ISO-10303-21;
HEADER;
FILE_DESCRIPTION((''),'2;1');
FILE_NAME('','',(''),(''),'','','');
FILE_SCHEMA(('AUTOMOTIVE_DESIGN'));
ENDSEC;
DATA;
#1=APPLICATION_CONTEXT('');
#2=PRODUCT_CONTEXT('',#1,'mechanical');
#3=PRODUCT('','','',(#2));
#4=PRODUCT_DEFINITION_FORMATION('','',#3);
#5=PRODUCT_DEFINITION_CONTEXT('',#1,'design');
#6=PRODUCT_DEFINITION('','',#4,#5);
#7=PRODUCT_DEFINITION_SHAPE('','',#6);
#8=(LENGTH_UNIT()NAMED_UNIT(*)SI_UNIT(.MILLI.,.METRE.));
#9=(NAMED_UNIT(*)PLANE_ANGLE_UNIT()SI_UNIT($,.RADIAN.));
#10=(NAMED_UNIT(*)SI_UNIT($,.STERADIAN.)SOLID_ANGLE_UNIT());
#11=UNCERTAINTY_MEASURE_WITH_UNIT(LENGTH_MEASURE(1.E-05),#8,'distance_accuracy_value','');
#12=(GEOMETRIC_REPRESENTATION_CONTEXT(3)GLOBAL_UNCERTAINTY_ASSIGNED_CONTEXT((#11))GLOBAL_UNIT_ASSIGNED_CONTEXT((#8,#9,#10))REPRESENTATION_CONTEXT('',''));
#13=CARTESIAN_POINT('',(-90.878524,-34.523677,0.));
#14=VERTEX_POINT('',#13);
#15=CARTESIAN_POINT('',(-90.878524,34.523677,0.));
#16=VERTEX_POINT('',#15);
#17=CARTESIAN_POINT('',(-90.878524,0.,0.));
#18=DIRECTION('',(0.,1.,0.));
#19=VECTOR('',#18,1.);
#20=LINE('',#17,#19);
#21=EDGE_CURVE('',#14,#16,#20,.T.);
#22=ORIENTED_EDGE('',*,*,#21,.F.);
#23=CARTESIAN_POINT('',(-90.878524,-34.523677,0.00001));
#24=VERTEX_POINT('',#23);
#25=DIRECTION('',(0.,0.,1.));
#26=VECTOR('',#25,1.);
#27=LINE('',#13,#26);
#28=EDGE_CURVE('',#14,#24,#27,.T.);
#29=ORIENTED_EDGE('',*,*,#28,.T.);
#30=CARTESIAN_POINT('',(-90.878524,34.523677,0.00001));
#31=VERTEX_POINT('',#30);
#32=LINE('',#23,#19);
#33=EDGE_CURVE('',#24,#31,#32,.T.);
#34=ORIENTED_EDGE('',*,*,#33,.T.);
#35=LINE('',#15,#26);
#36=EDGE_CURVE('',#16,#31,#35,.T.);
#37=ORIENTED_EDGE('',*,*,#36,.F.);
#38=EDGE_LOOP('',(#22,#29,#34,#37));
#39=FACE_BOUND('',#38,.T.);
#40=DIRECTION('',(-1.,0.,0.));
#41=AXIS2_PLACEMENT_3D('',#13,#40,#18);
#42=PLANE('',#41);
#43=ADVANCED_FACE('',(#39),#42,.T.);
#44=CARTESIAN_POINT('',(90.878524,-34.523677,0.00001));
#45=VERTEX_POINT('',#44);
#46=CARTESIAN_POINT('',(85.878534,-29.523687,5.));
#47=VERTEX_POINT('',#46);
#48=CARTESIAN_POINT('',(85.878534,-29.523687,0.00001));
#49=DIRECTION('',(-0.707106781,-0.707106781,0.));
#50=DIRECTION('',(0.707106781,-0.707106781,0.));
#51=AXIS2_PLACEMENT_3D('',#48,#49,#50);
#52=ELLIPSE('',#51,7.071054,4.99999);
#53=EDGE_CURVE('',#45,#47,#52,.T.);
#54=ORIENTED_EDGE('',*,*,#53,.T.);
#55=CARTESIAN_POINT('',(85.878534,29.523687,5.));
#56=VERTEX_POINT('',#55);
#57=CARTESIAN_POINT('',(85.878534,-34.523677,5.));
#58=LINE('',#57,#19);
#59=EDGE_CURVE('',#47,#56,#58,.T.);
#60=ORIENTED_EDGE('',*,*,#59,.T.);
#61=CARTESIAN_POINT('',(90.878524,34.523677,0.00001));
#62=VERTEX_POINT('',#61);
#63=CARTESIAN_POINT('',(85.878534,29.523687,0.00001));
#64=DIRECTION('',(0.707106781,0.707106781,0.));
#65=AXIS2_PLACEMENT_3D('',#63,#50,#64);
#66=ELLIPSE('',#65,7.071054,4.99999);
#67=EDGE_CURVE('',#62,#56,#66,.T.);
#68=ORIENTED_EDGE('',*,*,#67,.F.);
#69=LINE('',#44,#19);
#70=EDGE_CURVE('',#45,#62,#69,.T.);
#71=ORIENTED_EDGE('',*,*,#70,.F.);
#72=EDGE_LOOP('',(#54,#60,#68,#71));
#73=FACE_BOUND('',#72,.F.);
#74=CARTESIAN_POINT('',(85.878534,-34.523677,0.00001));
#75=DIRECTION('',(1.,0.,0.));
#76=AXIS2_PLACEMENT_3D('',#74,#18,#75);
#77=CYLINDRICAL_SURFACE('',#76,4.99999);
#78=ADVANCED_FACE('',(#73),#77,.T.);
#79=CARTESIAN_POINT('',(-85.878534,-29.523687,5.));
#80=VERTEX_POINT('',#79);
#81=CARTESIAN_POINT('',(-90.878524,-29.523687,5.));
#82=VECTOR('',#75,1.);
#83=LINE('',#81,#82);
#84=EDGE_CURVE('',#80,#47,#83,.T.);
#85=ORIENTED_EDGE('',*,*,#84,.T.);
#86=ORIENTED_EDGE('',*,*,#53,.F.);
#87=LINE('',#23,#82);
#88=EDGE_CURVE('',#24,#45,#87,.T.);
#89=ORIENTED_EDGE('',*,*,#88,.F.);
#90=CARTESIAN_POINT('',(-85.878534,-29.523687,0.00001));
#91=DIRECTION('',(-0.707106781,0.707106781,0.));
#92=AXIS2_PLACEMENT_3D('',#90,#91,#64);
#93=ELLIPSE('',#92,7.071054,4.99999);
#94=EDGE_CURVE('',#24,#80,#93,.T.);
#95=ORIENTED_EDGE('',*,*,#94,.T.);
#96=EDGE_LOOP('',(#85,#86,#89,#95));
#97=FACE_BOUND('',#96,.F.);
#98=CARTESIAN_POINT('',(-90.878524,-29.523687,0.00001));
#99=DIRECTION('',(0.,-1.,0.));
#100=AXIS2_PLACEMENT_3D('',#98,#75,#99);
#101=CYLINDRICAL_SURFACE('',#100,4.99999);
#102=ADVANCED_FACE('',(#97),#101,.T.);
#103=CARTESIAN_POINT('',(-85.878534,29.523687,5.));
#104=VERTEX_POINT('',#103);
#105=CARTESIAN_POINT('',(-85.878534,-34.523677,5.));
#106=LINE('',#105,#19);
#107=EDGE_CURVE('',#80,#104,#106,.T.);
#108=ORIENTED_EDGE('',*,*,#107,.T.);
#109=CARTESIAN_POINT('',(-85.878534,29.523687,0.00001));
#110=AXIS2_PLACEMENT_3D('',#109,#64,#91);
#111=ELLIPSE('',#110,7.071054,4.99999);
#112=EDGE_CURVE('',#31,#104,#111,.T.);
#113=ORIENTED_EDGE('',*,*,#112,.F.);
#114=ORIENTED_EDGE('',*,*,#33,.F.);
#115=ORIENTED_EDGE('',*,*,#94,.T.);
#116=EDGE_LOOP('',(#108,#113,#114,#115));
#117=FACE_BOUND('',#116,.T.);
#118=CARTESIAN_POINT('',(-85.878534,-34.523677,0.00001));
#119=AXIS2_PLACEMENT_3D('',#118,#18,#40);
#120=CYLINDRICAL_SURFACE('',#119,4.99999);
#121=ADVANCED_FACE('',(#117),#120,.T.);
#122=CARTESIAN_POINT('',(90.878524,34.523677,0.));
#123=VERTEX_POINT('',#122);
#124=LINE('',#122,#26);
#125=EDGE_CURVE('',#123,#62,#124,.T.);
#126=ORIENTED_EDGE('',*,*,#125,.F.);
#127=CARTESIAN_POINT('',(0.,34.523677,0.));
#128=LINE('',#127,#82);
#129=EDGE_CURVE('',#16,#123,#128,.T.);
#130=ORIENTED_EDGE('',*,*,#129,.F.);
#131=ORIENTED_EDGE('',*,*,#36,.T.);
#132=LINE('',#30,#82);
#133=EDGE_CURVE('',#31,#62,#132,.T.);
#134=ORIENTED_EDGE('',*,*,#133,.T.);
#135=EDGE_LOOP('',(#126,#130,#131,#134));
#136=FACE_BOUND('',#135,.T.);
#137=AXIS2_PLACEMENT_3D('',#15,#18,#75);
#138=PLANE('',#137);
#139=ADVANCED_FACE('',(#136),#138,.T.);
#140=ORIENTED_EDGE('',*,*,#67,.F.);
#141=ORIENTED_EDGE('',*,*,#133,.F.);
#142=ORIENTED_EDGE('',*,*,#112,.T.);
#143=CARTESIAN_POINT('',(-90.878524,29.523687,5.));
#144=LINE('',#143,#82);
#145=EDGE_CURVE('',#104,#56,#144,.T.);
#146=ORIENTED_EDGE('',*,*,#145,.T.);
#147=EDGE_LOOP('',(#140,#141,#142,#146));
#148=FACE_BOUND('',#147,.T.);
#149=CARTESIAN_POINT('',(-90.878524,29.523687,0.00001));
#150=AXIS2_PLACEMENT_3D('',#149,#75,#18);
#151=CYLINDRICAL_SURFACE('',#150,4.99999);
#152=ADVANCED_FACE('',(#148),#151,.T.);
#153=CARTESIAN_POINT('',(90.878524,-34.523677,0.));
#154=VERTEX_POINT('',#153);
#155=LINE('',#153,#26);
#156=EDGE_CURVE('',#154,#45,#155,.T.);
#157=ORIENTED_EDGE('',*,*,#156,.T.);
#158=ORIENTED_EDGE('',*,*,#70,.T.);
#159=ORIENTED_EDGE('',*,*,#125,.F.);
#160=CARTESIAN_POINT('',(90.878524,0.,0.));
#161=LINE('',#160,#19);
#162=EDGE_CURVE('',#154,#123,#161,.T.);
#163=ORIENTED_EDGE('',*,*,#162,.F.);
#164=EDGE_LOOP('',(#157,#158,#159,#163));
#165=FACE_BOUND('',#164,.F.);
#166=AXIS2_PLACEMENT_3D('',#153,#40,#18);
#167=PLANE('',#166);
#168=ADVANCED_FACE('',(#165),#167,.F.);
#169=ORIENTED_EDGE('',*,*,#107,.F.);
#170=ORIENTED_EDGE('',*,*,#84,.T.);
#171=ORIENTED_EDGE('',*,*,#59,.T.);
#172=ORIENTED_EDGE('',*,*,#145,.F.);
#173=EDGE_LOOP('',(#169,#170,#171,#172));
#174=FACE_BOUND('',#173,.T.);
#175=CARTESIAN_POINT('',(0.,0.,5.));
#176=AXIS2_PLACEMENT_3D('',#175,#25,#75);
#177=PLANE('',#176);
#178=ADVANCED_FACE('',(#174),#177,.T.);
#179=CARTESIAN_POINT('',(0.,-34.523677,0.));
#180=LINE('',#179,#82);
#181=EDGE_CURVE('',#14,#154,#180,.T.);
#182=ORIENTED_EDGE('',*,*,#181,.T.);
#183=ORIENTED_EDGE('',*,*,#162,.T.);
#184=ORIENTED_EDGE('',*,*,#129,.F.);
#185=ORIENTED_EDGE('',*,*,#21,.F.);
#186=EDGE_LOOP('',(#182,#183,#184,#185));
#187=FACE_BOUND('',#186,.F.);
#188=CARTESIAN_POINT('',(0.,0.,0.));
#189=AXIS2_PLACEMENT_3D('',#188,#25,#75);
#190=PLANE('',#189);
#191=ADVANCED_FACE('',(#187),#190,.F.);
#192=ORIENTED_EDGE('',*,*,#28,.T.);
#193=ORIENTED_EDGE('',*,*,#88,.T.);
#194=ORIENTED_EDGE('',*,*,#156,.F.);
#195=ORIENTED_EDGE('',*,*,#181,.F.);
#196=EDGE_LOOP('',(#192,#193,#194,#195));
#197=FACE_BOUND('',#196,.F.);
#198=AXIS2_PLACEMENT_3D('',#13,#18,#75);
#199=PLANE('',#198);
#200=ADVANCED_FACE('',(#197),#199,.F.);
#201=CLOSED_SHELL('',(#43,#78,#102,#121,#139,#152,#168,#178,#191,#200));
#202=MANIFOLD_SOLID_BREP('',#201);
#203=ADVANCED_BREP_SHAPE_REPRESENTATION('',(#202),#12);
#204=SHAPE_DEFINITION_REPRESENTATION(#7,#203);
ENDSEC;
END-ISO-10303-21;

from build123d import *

# Parameters (mm, degrees)
F0_W     = 181.7570477724
F0_H     = 69.0473541617
F1_DEPTH = 5
F2_R     = 4.99999


# Not quite as in the source:
# - a fillet or chamfer is up to 0.001 mm smaller than in the source, because OpenCascade refuses the exact size


with BuildPart() as f1:
    # F0 (on Top) → F1 (new body)
    with BuildSketch(Plane.XY):
        Rectangle(F0_W, F0_H)
    extrude(amount=F1_DEPTH)

    # F2 (radius 5 in the source; OpenCascade refuses exactly that, so slightly less here)
    f2_edges = [f1.edges().sort_by_distance(p)[0] for p in [
        (0, -34.523677, 5),
        (-90.878524, 0, 5),
        (0, 34.523677, 5),
        (90.878524, 0, 5),
    ]]
    fillet(f2_edges, radius=F2_R)


solid = f1.part
